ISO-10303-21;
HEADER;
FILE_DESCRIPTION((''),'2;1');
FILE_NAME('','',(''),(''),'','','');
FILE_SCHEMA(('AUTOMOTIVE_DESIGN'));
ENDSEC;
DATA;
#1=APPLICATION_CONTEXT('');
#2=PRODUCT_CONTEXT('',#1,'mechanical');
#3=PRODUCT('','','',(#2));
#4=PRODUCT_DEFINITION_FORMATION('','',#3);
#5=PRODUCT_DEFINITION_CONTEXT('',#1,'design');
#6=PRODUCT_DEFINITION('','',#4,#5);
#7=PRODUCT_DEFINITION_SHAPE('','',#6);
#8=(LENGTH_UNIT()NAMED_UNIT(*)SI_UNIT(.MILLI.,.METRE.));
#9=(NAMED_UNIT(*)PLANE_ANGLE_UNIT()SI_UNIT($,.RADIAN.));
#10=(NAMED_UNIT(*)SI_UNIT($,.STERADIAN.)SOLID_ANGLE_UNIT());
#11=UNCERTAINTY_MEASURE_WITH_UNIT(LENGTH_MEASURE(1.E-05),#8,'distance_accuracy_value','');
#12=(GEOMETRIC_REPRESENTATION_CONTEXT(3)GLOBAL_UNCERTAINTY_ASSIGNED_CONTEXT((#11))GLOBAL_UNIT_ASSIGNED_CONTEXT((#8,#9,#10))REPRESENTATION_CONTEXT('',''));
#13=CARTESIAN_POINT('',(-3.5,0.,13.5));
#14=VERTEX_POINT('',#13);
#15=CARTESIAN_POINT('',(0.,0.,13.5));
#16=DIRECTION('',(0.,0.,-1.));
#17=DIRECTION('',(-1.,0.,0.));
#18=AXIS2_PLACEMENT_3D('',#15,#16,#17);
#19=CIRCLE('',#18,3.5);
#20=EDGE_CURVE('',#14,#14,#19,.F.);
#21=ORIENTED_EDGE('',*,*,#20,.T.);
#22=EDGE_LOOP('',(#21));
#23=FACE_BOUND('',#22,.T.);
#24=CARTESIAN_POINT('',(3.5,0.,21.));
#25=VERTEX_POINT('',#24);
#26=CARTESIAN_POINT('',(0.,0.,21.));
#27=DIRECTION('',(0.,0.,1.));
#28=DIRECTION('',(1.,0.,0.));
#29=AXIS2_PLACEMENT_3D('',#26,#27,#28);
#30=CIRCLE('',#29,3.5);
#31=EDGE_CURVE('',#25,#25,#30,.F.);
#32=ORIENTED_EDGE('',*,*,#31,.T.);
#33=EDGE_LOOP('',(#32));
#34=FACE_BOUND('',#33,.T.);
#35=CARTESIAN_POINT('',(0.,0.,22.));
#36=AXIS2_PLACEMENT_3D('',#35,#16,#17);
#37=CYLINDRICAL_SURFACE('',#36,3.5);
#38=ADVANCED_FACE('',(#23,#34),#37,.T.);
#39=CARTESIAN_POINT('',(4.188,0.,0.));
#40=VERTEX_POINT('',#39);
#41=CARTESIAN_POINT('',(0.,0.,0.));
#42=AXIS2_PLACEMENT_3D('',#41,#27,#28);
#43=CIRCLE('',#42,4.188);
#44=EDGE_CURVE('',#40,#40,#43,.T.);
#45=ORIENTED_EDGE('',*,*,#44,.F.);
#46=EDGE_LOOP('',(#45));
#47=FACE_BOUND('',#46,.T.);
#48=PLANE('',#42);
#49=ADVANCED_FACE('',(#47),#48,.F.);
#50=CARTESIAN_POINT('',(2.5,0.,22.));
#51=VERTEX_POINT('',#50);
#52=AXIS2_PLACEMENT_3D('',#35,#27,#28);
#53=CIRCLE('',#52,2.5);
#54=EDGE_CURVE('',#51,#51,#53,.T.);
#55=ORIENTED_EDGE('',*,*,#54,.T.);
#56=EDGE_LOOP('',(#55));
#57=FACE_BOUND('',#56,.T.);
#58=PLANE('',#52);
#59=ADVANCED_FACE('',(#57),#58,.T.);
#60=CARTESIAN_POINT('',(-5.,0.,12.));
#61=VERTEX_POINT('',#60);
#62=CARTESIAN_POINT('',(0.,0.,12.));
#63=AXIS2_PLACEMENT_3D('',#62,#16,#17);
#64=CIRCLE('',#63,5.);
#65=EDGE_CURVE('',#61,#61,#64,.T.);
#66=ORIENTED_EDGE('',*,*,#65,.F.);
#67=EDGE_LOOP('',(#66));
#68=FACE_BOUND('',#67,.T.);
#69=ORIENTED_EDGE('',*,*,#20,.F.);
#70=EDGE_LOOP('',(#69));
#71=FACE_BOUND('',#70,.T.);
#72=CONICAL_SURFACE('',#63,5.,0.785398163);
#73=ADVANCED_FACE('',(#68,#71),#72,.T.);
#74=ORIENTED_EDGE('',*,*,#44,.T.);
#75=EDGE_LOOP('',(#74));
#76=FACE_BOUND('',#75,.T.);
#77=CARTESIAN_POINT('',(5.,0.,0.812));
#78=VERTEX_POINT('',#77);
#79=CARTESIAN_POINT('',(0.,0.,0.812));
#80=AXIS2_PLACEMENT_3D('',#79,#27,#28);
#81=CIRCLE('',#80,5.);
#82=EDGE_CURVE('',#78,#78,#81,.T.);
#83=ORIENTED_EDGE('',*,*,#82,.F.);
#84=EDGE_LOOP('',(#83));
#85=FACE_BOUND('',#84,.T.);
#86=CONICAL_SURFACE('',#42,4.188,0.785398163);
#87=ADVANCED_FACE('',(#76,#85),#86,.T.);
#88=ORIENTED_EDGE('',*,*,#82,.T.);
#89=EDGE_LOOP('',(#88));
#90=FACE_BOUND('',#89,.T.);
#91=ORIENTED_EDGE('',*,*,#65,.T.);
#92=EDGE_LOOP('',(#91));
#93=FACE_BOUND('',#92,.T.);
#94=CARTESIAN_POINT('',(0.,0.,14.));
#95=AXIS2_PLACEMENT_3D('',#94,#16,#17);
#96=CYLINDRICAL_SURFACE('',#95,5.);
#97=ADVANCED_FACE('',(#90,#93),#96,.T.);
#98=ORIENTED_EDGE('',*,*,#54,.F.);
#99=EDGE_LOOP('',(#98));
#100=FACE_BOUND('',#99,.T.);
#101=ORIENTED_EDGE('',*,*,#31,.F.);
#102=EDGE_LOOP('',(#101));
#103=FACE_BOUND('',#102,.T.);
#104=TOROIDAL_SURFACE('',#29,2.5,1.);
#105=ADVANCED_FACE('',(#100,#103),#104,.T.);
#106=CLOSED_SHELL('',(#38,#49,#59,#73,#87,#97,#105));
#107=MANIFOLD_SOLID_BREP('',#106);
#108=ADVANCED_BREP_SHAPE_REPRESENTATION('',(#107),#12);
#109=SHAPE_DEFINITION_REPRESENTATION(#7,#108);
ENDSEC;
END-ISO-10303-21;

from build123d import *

# Parameters (mm, degrees)
SKETCH_1_R      = 3.5
EXTRUDE_1_DEPTH = 22
FILLET_1_R      = 1
SKETCH_2_R      = 5
EXTRUDE_2_DEPTH = 14
CHAMFER_1_SIZE  = 2


# Read off the part's stored shape, not the designer's step: M10 机械螺纹 螺柱1
with BuildPart() as part:
    # 草图1 → 凸台-拉伸1 (new body)
    with BuildSketch(Plane.XY):
        Circle(SKETCH_1_R)
    extrude(amount=EXTRUDE_1_DEPTH)

    # 圆角1
    fillet_1_edges = [part.edges().sort_by_distance(p)[0] for p in [
        (-3.5, 0, 22),
    ]]
    fillet(fillet_1_edges, radius=FILLET_1_R)

    # 草图2 → 凸台-拉伸2 (add)
    with BuildSketch(Plane(origin=(0, 0, 0), x_dir=(-1, 0, 0), z_dir=(0, 0, -1))):
        Circle(SKETCH_2_R)
    extrude(amount=-EXTRUDE_2_DEPTH)

    # M10 机械螺纹 螺柱1 outline → M10 机械螺纹 螺柱1 (revolve, cut)
    with BuildSketch(Plane.XZ):
        Polygon((5, 0.812), (4.188, 0), (5, 0), align=None)
    revolve(axis=Axis((0, 0, 0), (0, 0, 1)), mode=Mode.SUBTRACT)

    # 倒角1
    # the kernel refuses this chamfer: 2 mm, written as the material it takes off along each edge
    with BuildSketch(Plane(origin=(0, 0, 14), x_dir=(-1, 0, 0), z_dir=(0, -1, 0))) as chamfer_1_piece_1_section:
        Polygon((5, CHAMFER_1_SIZE), (5 - CHAMFER_1_SIZE, 0), (5, 0), align=None)
    chamfer_1_piece_1 = revolve(axis=Axis((0, 0, 14), (0, 0, -1)), mode=Mode.PRIVATE)
    chamfer_1_piece_1 = chamfer_1_piece_1 - Plane(origin=(0, 0, 12.748861674), x_dir=(1, 0, 0), z_dir=(0, 0, -1)) * Cylinder(3.5, 20, mode=Mode.PRIVATE)
    add(chamfer_1_piece_1, mode=Mode.SUBTRACT)


solid = part.part
